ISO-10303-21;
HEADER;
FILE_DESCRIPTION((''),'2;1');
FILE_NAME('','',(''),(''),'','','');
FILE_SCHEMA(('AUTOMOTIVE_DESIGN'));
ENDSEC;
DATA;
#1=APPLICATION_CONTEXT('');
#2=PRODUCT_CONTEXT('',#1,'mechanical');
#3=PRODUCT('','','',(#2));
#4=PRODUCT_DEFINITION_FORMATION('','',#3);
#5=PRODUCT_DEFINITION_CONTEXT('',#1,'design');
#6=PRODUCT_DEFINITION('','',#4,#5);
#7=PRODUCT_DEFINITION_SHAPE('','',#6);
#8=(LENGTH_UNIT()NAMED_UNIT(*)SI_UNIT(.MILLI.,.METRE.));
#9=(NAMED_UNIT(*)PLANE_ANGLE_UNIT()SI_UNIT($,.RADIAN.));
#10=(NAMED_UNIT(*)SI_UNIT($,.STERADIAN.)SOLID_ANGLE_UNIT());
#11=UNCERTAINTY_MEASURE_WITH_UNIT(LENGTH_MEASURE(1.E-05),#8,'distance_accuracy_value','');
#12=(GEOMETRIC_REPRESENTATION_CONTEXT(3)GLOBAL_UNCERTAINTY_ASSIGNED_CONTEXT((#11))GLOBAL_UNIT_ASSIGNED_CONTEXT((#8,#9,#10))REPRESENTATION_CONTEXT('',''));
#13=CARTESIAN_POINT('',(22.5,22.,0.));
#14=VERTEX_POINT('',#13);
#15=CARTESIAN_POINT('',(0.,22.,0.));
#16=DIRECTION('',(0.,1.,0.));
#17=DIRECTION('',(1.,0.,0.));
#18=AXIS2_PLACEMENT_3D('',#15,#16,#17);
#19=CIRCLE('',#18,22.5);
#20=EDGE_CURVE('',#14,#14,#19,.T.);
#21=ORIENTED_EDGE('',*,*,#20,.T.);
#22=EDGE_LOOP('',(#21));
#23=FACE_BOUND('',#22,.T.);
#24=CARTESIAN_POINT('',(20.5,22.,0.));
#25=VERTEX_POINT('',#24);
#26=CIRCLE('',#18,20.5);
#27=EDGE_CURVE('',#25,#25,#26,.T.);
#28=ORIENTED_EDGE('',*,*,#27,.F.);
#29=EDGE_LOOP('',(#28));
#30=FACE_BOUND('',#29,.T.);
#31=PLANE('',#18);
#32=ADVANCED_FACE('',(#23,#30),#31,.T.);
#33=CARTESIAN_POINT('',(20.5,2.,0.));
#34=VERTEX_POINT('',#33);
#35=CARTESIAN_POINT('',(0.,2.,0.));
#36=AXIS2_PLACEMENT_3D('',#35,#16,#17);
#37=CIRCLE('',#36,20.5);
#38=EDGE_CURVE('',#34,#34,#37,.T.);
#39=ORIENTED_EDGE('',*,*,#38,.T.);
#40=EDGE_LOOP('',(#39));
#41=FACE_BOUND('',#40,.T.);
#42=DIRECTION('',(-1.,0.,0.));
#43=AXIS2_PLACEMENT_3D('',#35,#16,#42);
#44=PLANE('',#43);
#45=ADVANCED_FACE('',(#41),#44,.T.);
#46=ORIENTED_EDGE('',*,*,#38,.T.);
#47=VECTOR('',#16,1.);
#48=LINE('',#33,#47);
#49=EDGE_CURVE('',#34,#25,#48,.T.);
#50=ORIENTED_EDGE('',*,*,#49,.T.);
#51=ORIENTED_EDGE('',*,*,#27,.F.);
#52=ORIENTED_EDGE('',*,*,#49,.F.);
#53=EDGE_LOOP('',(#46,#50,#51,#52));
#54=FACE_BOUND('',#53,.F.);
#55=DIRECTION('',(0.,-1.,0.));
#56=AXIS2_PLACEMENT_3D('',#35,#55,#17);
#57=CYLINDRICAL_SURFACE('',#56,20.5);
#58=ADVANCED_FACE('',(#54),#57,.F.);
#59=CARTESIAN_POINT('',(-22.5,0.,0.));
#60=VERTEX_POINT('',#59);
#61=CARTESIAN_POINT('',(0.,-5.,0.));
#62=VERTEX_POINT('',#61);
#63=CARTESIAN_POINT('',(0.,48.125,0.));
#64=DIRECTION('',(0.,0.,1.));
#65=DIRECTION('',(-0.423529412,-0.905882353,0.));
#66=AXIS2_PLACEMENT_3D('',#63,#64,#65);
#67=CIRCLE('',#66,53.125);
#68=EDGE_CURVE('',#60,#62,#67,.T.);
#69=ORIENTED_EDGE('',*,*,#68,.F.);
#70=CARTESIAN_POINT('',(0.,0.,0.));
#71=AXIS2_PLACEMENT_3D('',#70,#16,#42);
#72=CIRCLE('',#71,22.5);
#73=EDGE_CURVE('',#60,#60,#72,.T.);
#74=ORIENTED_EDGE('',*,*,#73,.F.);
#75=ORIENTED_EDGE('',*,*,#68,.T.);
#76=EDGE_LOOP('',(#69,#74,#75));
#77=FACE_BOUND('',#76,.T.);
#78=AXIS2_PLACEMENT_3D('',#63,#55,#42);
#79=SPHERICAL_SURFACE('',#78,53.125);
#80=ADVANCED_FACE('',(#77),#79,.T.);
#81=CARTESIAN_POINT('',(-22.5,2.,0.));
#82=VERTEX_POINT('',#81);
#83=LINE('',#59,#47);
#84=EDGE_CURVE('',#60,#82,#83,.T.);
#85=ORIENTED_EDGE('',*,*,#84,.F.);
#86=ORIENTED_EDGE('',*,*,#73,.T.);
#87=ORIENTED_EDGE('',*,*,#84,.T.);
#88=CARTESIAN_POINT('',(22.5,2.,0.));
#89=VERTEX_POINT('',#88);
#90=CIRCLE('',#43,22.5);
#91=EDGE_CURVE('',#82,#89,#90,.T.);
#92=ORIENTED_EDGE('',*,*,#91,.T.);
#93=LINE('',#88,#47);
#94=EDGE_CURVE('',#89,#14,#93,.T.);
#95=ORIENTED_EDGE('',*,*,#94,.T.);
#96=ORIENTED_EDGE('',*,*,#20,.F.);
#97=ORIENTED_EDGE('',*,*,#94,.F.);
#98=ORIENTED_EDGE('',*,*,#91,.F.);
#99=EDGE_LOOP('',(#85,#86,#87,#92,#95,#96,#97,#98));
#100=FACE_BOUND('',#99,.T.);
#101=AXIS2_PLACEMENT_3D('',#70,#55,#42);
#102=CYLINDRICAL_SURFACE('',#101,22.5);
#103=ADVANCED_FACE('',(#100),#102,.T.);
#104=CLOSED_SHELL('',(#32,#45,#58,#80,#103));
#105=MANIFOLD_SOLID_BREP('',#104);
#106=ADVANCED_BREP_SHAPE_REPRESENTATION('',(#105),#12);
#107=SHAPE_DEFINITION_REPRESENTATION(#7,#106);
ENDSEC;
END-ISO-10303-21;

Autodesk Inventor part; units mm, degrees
ref_plane "YZ Plane" through (0, 0, 0) normal (1, 0, 0) x (0, 1, 0)
ref_plane "XZ Plane" through (0, 0, 0) normal (0, 1, 0) x (-1, 0, 0)
ref_plane "XY Plane" through (0, 0, 0) normal (0, 0, 1) x (1, 0, 0)
sketch "Sketch1" plane through (0, 0, 0) normal (0, 1, 0) x (-1, 0, 0)
  circle A0 centre (0, 0) radius 22.5
  dimension "d0" = 45
extrude "Extrusion1" add sketch "Sketch1" along normal blind 2
sketch "Sketch2" plane through (0, 2, 0) normal (0, 1, 0) x (1, 0, 0)
  circle A0 centre (0, 0) radius 22.5 projected
  circle A1 centre (0, 0) radius 22.5 projected
  circle A2 centre (0, 0) radius 20.5
  dimension "d3" = 2
extrude "Extrusion2" add sketch "Sketch2" along normal blind 20
sketch "Sketch3" plane through (0, 0, 0) normal (0, 0, 1) x (1, 0, 0)
  line L0 (22.5, 0) -> (-22.5, 0) projected
  line L1 (22.5, 0) -> (0, 0)
  line L2 (0, 0) -> (0, -5)
  arc A0 (-22.5, 0) -> (0, -5) centre (0, 48.125) ccw
  dimension "d6" = 5
revolve "Revolution1" add sketch "Sketch3" angle 360 about axis through (0, 0, 0) along (0, -1, 0)
properties part number "Pieza 1.1 final" material "ABS Plastic"
